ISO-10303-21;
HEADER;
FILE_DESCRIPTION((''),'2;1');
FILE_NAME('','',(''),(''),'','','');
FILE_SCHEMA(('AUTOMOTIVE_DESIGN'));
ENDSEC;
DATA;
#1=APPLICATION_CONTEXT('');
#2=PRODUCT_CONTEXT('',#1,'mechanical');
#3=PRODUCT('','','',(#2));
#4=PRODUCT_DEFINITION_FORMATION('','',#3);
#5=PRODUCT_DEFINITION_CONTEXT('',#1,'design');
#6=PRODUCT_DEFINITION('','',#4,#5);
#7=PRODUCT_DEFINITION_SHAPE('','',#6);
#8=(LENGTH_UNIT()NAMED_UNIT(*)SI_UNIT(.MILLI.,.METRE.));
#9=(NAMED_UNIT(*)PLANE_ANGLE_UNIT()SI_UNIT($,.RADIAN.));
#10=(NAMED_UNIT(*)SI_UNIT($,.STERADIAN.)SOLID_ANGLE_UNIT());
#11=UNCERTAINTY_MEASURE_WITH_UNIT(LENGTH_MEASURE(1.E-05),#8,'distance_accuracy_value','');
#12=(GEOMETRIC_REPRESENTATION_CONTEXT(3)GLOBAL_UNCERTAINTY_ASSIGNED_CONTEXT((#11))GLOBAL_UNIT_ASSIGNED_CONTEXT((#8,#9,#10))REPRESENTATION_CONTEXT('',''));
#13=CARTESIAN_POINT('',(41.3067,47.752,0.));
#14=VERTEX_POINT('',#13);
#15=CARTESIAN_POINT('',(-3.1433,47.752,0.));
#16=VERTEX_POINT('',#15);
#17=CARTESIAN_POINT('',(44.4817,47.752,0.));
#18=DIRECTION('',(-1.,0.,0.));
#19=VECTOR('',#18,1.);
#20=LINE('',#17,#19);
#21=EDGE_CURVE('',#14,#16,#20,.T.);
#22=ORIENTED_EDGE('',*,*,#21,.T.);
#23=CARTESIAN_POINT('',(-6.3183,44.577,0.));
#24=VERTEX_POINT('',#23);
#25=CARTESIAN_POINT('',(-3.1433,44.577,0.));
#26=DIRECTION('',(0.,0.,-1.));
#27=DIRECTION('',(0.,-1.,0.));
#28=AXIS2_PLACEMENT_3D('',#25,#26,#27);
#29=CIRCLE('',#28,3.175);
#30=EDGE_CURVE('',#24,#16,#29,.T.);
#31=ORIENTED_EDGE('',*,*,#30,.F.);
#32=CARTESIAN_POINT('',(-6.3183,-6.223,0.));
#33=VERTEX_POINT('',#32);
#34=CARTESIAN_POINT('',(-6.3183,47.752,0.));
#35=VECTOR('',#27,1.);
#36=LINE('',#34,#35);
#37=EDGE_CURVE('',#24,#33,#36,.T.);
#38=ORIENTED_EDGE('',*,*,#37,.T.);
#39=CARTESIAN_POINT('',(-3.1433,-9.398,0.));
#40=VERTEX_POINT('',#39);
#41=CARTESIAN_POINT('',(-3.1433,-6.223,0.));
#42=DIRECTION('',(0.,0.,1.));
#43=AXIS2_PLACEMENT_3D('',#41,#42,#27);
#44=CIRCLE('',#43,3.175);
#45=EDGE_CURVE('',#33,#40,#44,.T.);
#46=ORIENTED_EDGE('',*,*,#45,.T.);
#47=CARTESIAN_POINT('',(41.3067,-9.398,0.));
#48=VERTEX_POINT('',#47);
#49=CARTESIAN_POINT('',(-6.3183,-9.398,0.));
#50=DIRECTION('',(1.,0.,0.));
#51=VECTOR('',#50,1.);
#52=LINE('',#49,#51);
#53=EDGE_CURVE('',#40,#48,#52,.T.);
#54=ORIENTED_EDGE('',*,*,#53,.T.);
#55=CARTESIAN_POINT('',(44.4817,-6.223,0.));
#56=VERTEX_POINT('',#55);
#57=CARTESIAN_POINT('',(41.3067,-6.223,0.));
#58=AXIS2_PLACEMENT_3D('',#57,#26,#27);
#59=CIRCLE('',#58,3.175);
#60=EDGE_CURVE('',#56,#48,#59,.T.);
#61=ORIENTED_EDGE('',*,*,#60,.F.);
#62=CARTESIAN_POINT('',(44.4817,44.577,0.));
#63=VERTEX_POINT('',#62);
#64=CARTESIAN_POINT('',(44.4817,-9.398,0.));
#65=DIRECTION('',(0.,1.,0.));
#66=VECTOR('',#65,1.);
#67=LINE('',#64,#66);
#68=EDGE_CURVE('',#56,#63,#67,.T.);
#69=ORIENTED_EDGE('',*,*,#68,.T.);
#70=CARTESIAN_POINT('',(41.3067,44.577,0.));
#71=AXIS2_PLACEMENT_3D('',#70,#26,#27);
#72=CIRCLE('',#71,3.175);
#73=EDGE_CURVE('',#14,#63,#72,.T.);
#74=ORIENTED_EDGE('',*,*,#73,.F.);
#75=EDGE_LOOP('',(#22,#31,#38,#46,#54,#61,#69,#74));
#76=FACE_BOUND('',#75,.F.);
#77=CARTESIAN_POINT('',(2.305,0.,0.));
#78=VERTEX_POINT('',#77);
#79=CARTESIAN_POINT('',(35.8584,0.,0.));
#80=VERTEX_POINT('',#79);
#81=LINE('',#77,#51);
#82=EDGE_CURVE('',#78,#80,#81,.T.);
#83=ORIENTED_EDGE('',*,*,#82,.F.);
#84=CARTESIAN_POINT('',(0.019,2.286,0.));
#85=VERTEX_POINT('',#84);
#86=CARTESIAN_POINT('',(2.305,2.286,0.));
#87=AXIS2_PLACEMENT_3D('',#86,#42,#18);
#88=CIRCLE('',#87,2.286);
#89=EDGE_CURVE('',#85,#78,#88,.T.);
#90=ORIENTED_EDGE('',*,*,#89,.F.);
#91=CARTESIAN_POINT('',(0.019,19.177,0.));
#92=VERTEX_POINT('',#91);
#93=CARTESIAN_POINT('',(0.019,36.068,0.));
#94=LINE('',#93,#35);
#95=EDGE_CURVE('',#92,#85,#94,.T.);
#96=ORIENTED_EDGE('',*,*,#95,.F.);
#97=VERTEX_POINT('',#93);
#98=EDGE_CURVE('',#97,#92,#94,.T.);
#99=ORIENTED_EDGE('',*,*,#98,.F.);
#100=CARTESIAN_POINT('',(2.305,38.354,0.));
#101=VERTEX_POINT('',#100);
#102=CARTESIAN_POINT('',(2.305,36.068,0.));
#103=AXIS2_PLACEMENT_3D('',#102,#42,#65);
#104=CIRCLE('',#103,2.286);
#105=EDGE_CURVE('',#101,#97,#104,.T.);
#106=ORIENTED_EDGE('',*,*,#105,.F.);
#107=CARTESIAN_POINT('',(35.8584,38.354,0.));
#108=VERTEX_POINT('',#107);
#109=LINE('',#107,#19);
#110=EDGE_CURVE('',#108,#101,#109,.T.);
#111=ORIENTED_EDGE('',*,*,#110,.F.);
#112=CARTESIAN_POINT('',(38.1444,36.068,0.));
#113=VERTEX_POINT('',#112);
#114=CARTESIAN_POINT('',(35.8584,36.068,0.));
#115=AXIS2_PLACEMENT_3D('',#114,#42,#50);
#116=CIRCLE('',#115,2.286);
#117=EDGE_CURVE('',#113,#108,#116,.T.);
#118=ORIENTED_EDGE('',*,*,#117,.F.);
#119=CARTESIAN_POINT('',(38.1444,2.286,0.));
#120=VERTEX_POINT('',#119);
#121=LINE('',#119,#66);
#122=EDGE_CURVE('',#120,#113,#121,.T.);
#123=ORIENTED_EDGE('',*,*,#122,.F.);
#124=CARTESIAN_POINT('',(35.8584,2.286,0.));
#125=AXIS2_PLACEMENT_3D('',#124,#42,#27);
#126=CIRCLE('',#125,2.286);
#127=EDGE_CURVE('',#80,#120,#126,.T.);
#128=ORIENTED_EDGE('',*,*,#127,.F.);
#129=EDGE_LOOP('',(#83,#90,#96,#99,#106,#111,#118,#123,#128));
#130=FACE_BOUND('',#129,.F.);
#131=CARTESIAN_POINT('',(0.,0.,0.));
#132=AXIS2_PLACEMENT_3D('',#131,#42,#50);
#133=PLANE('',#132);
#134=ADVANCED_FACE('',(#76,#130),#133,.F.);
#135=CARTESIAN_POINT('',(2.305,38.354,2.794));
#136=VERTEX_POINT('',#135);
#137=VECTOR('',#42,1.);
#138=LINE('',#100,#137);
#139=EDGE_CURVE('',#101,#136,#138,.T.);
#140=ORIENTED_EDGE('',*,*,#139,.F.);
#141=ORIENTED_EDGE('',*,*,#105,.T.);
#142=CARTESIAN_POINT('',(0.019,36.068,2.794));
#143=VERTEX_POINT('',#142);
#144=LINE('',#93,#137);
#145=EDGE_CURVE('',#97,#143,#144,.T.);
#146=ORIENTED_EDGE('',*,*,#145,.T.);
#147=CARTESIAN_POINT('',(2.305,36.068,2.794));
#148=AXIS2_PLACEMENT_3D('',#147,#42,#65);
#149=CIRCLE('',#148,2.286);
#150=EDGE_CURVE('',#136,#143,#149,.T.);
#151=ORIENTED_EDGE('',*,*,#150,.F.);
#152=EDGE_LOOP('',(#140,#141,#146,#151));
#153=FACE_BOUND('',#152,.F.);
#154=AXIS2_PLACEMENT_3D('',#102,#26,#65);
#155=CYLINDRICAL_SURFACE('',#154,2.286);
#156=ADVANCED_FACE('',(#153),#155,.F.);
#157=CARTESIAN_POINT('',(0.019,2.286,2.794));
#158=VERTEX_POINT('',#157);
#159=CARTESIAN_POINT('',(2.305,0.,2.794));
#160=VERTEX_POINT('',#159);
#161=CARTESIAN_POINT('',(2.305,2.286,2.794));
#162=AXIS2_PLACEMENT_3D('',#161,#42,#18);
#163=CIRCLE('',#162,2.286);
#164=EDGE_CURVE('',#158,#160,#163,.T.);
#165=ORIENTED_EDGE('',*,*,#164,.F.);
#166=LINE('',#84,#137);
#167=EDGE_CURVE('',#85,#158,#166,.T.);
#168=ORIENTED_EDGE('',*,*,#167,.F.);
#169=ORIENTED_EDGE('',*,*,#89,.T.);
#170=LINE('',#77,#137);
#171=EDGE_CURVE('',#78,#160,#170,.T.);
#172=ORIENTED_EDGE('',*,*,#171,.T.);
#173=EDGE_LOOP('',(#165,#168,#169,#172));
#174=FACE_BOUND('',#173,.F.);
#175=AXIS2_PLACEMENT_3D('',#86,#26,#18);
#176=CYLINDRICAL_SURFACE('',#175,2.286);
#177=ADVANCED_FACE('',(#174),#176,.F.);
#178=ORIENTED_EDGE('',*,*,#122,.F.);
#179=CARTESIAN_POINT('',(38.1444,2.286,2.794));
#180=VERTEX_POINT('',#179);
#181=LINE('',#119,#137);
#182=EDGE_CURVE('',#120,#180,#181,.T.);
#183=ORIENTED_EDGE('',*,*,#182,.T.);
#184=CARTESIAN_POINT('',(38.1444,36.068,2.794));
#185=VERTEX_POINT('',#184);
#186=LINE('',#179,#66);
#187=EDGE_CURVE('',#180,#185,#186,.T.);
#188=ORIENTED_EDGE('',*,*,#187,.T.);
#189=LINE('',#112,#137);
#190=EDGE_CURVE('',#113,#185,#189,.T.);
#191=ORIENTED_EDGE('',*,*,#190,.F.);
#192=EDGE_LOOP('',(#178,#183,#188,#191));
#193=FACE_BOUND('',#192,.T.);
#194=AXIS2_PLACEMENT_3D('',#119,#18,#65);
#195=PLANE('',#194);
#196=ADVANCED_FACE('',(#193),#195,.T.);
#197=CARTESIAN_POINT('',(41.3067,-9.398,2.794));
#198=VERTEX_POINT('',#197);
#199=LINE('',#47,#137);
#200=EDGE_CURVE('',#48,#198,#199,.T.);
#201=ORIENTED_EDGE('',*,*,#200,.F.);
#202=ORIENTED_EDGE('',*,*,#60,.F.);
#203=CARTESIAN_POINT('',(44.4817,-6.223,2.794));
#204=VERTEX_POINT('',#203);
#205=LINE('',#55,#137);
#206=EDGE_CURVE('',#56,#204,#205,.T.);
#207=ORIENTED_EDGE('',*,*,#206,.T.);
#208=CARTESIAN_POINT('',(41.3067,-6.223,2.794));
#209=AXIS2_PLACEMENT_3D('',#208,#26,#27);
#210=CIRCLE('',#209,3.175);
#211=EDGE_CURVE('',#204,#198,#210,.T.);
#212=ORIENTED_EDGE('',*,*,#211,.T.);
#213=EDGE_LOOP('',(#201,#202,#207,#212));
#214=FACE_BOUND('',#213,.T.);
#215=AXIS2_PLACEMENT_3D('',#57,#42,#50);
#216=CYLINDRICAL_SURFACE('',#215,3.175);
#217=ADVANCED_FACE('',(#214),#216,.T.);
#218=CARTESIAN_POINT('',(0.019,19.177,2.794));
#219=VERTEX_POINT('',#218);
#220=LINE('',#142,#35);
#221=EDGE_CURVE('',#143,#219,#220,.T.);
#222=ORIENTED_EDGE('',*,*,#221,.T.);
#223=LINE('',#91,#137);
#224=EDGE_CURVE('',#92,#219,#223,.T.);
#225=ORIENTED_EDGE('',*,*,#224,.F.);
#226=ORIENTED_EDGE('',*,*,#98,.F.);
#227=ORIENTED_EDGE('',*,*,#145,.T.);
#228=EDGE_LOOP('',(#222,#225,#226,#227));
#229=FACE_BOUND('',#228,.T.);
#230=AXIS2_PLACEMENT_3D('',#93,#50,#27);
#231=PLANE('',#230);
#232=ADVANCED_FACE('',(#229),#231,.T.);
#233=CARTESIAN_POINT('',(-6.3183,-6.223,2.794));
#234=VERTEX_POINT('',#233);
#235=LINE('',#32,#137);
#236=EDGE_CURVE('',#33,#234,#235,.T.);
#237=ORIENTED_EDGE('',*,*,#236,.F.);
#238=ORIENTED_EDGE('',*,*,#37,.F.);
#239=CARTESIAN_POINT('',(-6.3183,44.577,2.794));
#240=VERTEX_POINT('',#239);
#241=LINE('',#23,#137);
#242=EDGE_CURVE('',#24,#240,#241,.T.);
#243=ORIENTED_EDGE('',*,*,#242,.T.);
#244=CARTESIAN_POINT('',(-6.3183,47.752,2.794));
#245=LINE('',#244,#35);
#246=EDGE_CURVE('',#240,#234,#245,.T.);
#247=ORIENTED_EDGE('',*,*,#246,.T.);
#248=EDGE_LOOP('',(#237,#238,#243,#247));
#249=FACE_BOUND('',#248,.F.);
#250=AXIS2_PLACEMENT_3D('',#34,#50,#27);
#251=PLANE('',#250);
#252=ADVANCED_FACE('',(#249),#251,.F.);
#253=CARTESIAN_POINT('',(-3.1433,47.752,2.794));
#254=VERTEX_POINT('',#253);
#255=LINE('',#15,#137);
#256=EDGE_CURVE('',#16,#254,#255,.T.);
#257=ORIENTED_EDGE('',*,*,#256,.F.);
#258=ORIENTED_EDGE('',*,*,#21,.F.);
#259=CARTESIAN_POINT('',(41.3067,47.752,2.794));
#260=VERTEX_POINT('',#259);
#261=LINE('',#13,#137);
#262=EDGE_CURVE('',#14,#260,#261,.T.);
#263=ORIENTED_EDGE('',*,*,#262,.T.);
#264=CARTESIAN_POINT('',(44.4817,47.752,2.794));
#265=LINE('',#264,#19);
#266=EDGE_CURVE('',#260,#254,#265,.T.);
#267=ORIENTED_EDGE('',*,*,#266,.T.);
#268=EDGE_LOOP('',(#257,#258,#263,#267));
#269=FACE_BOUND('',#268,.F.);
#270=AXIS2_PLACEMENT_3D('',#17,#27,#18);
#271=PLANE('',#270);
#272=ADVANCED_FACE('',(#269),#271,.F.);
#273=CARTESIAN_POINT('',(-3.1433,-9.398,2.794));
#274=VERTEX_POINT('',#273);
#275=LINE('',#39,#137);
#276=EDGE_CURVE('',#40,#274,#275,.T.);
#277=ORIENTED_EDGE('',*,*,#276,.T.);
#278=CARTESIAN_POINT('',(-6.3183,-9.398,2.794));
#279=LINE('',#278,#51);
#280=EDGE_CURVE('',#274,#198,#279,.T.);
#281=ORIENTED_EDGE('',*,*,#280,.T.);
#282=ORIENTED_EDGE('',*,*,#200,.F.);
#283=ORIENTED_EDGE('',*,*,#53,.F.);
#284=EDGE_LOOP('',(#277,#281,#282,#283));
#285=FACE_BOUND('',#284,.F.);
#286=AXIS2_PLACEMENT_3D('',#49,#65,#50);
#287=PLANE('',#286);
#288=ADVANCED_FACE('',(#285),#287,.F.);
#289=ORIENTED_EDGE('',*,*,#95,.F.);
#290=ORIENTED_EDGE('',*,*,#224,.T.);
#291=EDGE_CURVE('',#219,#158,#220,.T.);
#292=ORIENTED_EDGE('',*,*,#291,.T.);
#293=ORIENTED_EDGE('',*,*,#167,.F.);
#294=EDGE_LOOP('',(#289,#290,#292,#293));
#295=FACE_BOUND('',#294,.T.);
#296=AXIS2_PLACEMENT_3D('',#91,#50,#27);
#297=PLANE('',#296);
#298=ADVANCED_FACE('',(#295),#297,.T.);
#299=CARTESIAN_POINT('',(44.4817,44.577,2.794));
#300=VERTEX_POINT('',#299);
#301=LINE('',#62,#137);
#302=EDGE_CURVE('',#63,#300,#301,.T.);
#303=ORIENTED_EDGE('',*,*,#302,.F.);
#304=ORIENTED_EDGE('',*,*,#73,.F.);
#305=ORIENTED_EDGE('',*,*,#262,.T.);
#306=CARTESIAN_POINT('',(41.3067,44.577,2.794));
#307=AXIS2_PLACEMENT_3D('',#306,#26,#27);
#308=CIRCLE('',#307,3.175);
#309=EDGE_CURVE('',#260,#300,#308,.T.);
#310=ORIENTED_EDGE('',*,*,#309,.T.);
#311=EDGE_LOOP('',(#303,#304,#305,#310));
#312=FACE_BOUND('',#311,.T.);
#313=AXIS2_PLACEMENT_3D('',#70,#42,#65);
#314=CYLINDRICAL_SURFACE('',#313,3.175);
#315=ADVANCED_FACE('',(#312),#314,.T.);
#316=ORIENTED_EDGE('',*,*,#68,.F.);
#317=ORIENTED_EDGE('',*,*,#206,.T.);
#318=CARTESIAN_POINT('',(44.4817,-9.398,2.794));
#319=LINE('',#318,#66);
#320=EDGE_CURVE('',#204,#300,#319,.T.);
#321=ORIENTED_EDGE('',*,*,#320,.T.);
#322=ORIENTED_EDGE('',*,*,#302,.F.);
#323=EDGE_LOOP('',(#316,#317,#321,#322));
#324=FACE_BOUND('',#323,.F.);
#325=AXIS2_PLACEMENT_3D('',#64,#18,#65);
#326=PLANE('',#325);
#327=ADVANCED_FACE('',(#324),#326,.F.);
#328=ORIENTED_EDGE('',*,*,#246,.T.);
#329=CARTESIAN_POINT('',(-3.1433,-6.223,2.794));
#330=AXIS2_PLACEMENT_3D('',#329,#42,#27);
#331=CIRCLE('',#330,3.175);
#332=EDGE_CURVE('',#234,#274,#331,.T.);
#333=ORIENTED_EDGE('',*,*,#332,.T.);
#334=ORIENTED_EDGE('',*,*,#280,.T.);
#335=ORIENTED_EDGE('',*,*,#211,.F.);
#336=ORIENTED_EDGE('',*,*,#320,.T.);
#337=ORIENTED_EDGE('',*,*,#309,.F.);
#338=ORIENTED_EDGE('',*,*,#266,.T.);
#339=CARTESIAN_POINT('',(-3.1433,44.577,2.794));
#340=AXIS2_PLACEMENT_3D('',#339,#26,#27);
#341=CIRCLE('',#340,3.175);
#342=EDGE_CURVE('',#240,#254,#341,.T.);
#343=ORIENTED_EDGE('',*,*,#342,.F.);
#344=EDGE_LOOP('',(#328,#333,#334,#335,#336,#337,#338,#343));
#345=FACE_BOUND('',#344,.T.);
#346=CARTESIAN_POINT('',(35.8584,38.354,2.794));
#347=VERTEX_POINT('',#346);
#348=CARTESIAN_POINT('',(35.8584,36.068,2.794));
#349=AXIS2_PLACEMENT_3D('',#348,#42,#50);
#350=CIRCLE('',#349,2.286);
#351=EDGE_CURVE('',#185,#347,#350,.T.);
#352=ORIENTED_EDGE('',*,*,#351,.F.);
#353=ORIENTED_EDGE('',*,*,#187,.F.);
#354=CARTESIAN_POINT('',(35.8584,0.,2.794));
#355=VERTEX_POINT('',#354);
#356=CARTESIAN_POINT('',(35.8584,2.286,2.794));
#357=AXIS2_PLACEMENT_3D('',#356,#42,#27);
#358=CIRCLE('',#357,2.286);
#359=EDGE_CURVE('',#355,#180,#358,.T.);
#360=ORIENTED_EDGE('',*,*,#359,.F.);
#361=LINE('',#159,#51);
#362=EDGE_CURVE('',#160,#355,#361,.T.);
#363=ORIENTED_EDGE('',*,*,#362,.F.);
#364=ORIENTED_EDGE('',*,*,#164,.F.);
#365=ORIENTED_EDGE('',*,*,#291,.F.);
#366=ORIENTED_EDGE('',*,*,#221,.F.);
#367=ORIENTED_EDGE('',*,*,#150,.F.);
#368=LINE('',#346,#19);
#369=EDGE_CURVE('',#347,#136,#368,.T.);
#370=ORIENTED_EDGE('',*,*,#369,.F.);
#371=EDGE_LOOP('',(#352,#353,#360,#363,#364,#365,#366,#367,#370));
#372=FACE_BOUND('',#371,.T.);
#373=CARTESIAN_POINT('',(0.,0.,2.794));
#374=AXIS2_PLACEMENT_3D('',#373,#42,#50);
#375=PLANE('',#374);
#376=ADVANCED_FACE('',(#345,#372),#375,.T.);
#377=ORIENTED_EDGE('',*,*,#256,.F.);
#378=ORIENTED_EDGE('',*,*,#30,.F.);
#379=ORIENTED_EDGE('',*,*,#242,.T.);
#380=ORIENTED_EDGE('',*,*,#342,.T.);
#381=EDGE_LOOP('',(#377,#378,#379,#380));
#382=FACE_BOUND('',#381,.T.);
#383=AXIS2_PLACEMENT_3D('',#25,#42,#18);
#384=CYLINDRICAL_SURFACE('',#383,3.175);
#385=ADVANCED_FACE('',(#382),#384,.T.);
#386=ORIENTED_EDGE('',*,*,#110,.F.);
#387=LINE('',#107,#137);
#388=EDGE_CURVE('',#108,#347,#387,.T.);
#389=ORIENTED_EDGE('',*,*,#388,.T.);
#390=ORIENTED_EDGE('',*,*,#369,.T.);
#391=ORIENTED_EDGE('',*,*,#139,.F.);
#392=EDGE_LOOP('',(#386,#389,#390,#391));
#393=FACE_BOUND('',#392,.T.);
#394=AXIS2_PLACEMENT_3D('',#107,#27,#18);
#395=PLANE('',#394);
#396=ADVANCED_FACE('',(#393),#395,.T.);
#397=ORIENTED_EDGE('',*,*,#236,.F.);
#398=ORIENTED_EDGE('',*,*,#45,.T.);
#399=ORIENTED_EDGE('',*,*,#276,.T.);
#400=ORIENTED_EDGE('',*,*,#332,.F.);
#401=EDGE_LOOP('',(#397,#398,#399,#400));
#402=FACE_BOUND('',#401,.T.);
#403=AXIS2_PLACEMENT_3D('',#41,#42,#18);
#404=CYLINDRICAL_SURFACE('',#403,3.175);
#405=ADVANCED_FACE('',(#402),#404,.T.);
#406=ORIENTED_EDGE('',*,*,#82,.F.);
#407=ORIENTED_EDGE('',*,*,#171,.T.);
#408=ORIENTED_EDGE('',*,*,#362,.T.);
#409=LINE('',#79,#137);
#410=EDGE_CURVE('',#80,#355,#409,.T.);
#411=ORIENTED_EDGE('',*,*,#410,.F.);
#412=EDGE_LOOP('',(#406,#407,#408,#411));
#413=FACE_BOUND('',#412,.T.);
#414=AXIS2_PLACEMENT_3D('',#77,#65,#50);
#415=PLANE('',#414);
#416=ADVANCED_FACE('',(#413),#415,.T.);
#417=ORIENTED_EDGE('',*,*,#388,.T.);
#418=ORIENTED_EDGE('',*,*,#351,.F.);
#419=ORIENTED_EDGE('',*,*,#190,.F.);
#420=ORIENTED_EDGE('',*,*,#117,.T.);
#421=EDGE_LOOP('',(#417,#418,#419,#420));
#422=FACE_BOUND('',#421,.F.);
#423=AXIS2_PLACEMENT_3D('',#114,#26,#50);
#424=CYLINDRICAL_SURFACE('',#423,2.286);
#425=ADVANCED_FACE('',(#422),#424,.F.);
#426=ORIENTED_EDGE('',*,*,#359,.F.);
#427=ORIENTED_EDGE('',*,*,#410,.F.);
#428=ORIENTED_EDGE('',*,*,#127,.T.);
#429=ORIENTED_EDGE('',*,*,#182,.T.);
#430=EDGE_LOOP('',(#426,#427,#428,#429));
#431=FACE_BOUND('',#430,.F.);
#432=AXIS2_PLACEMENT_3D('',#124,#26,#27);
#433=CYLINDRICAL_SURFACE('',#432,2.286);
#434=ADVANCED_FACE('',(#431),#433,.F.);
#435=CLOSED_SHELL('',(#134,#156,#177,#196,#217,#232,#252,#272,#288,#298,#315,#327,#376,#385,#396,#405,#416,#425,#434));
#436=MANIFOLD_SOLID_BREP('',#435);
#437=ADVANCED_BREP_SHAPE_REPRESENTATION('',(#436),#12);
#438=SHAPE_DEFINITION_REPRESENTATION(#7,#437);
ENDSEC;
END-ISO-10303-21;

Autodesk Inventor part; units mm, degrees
ref_plane "YZ Plane" through (0, 0, 0) normal (1, 0, 0) x (0, 1, 0)
ref_plane "XZ Plane" through (0, 0, 0) normal (0, 1, 0) x (-1, 0, 0)
ref_plane "XY Plane" through (0, 0, 0) normal (0, 0, 1) x (1, 0, 0)
sketch "Sketch1" plane through (0, 0, 0) normal (0, 0, 1) x (1, 0, 0)
  line L0 (0, 19.177) -> (19.0817, 19.177)
  line L1 (-6.3183, -9.398) -> (44.4817, -9.398)
  line L2 (44.4817, -9.398) -> (44.4817, 47.752)
  line L3 (44.4817, 47.752) -> (-6.3183, 47.752)
  line L4 (-6.3183, 47.752) -> (-6.3183, -9.398)
  line L5 (-6.3183, -9.398) -> (44.4817, 47.752) construction
  line L6 (44.4817, -9.398) -> (-6.3183, 47.752) construction
  line L7 (2.305, 0) -> (35.8584, 0)
  line L8 (38.1444, 2.286) -> (38.1444, 36.068)
  line L9 (35.8584, 38.354) -> (2.305, 38.354)
  line L10 (0.019, 36.068) -> (0.019, 2.286)
  line L11 (0.019, 0) -> (38.1444, 38.354) construction
  line L12 (38.1444, 0) -> (0.019, 38.354) construction
  arc A0 (2.305, 38.354) -> (0.019, 36.068) centre (2.305, 36.068) ccw
  arc A1 (38.1444, 36.068) -> (35.8584, 38.354) centre (35.8584, 36.068) ccw
  arc A2 (35.8584, 0) -> (38.1444, 2.286) centre (35.8584, 2.286) ccw
  arc A3 (0.019, 2.286) -> (2.305, 0) centre (2.305, 2.286) ccw
  dimension "d15" = 50.8
  dimension "d16" = 57.15
  dimension "d19" = 38.1254
  dimension "d20" = 38.354
  dimension "d21" = 2.286
extrude "Extrusion1" add sketch "Sketch1" along normal blind 2.794
fillet "Fillet4" radius 3.175 4 edges at (-6.3183, 47.752, 1.397) (44.4817, 47.752, 1.397) (44.4817, -9.398, 1.397) (-6.3183, -9.398, 1.397)
properties part number "ESC Hole Test"
